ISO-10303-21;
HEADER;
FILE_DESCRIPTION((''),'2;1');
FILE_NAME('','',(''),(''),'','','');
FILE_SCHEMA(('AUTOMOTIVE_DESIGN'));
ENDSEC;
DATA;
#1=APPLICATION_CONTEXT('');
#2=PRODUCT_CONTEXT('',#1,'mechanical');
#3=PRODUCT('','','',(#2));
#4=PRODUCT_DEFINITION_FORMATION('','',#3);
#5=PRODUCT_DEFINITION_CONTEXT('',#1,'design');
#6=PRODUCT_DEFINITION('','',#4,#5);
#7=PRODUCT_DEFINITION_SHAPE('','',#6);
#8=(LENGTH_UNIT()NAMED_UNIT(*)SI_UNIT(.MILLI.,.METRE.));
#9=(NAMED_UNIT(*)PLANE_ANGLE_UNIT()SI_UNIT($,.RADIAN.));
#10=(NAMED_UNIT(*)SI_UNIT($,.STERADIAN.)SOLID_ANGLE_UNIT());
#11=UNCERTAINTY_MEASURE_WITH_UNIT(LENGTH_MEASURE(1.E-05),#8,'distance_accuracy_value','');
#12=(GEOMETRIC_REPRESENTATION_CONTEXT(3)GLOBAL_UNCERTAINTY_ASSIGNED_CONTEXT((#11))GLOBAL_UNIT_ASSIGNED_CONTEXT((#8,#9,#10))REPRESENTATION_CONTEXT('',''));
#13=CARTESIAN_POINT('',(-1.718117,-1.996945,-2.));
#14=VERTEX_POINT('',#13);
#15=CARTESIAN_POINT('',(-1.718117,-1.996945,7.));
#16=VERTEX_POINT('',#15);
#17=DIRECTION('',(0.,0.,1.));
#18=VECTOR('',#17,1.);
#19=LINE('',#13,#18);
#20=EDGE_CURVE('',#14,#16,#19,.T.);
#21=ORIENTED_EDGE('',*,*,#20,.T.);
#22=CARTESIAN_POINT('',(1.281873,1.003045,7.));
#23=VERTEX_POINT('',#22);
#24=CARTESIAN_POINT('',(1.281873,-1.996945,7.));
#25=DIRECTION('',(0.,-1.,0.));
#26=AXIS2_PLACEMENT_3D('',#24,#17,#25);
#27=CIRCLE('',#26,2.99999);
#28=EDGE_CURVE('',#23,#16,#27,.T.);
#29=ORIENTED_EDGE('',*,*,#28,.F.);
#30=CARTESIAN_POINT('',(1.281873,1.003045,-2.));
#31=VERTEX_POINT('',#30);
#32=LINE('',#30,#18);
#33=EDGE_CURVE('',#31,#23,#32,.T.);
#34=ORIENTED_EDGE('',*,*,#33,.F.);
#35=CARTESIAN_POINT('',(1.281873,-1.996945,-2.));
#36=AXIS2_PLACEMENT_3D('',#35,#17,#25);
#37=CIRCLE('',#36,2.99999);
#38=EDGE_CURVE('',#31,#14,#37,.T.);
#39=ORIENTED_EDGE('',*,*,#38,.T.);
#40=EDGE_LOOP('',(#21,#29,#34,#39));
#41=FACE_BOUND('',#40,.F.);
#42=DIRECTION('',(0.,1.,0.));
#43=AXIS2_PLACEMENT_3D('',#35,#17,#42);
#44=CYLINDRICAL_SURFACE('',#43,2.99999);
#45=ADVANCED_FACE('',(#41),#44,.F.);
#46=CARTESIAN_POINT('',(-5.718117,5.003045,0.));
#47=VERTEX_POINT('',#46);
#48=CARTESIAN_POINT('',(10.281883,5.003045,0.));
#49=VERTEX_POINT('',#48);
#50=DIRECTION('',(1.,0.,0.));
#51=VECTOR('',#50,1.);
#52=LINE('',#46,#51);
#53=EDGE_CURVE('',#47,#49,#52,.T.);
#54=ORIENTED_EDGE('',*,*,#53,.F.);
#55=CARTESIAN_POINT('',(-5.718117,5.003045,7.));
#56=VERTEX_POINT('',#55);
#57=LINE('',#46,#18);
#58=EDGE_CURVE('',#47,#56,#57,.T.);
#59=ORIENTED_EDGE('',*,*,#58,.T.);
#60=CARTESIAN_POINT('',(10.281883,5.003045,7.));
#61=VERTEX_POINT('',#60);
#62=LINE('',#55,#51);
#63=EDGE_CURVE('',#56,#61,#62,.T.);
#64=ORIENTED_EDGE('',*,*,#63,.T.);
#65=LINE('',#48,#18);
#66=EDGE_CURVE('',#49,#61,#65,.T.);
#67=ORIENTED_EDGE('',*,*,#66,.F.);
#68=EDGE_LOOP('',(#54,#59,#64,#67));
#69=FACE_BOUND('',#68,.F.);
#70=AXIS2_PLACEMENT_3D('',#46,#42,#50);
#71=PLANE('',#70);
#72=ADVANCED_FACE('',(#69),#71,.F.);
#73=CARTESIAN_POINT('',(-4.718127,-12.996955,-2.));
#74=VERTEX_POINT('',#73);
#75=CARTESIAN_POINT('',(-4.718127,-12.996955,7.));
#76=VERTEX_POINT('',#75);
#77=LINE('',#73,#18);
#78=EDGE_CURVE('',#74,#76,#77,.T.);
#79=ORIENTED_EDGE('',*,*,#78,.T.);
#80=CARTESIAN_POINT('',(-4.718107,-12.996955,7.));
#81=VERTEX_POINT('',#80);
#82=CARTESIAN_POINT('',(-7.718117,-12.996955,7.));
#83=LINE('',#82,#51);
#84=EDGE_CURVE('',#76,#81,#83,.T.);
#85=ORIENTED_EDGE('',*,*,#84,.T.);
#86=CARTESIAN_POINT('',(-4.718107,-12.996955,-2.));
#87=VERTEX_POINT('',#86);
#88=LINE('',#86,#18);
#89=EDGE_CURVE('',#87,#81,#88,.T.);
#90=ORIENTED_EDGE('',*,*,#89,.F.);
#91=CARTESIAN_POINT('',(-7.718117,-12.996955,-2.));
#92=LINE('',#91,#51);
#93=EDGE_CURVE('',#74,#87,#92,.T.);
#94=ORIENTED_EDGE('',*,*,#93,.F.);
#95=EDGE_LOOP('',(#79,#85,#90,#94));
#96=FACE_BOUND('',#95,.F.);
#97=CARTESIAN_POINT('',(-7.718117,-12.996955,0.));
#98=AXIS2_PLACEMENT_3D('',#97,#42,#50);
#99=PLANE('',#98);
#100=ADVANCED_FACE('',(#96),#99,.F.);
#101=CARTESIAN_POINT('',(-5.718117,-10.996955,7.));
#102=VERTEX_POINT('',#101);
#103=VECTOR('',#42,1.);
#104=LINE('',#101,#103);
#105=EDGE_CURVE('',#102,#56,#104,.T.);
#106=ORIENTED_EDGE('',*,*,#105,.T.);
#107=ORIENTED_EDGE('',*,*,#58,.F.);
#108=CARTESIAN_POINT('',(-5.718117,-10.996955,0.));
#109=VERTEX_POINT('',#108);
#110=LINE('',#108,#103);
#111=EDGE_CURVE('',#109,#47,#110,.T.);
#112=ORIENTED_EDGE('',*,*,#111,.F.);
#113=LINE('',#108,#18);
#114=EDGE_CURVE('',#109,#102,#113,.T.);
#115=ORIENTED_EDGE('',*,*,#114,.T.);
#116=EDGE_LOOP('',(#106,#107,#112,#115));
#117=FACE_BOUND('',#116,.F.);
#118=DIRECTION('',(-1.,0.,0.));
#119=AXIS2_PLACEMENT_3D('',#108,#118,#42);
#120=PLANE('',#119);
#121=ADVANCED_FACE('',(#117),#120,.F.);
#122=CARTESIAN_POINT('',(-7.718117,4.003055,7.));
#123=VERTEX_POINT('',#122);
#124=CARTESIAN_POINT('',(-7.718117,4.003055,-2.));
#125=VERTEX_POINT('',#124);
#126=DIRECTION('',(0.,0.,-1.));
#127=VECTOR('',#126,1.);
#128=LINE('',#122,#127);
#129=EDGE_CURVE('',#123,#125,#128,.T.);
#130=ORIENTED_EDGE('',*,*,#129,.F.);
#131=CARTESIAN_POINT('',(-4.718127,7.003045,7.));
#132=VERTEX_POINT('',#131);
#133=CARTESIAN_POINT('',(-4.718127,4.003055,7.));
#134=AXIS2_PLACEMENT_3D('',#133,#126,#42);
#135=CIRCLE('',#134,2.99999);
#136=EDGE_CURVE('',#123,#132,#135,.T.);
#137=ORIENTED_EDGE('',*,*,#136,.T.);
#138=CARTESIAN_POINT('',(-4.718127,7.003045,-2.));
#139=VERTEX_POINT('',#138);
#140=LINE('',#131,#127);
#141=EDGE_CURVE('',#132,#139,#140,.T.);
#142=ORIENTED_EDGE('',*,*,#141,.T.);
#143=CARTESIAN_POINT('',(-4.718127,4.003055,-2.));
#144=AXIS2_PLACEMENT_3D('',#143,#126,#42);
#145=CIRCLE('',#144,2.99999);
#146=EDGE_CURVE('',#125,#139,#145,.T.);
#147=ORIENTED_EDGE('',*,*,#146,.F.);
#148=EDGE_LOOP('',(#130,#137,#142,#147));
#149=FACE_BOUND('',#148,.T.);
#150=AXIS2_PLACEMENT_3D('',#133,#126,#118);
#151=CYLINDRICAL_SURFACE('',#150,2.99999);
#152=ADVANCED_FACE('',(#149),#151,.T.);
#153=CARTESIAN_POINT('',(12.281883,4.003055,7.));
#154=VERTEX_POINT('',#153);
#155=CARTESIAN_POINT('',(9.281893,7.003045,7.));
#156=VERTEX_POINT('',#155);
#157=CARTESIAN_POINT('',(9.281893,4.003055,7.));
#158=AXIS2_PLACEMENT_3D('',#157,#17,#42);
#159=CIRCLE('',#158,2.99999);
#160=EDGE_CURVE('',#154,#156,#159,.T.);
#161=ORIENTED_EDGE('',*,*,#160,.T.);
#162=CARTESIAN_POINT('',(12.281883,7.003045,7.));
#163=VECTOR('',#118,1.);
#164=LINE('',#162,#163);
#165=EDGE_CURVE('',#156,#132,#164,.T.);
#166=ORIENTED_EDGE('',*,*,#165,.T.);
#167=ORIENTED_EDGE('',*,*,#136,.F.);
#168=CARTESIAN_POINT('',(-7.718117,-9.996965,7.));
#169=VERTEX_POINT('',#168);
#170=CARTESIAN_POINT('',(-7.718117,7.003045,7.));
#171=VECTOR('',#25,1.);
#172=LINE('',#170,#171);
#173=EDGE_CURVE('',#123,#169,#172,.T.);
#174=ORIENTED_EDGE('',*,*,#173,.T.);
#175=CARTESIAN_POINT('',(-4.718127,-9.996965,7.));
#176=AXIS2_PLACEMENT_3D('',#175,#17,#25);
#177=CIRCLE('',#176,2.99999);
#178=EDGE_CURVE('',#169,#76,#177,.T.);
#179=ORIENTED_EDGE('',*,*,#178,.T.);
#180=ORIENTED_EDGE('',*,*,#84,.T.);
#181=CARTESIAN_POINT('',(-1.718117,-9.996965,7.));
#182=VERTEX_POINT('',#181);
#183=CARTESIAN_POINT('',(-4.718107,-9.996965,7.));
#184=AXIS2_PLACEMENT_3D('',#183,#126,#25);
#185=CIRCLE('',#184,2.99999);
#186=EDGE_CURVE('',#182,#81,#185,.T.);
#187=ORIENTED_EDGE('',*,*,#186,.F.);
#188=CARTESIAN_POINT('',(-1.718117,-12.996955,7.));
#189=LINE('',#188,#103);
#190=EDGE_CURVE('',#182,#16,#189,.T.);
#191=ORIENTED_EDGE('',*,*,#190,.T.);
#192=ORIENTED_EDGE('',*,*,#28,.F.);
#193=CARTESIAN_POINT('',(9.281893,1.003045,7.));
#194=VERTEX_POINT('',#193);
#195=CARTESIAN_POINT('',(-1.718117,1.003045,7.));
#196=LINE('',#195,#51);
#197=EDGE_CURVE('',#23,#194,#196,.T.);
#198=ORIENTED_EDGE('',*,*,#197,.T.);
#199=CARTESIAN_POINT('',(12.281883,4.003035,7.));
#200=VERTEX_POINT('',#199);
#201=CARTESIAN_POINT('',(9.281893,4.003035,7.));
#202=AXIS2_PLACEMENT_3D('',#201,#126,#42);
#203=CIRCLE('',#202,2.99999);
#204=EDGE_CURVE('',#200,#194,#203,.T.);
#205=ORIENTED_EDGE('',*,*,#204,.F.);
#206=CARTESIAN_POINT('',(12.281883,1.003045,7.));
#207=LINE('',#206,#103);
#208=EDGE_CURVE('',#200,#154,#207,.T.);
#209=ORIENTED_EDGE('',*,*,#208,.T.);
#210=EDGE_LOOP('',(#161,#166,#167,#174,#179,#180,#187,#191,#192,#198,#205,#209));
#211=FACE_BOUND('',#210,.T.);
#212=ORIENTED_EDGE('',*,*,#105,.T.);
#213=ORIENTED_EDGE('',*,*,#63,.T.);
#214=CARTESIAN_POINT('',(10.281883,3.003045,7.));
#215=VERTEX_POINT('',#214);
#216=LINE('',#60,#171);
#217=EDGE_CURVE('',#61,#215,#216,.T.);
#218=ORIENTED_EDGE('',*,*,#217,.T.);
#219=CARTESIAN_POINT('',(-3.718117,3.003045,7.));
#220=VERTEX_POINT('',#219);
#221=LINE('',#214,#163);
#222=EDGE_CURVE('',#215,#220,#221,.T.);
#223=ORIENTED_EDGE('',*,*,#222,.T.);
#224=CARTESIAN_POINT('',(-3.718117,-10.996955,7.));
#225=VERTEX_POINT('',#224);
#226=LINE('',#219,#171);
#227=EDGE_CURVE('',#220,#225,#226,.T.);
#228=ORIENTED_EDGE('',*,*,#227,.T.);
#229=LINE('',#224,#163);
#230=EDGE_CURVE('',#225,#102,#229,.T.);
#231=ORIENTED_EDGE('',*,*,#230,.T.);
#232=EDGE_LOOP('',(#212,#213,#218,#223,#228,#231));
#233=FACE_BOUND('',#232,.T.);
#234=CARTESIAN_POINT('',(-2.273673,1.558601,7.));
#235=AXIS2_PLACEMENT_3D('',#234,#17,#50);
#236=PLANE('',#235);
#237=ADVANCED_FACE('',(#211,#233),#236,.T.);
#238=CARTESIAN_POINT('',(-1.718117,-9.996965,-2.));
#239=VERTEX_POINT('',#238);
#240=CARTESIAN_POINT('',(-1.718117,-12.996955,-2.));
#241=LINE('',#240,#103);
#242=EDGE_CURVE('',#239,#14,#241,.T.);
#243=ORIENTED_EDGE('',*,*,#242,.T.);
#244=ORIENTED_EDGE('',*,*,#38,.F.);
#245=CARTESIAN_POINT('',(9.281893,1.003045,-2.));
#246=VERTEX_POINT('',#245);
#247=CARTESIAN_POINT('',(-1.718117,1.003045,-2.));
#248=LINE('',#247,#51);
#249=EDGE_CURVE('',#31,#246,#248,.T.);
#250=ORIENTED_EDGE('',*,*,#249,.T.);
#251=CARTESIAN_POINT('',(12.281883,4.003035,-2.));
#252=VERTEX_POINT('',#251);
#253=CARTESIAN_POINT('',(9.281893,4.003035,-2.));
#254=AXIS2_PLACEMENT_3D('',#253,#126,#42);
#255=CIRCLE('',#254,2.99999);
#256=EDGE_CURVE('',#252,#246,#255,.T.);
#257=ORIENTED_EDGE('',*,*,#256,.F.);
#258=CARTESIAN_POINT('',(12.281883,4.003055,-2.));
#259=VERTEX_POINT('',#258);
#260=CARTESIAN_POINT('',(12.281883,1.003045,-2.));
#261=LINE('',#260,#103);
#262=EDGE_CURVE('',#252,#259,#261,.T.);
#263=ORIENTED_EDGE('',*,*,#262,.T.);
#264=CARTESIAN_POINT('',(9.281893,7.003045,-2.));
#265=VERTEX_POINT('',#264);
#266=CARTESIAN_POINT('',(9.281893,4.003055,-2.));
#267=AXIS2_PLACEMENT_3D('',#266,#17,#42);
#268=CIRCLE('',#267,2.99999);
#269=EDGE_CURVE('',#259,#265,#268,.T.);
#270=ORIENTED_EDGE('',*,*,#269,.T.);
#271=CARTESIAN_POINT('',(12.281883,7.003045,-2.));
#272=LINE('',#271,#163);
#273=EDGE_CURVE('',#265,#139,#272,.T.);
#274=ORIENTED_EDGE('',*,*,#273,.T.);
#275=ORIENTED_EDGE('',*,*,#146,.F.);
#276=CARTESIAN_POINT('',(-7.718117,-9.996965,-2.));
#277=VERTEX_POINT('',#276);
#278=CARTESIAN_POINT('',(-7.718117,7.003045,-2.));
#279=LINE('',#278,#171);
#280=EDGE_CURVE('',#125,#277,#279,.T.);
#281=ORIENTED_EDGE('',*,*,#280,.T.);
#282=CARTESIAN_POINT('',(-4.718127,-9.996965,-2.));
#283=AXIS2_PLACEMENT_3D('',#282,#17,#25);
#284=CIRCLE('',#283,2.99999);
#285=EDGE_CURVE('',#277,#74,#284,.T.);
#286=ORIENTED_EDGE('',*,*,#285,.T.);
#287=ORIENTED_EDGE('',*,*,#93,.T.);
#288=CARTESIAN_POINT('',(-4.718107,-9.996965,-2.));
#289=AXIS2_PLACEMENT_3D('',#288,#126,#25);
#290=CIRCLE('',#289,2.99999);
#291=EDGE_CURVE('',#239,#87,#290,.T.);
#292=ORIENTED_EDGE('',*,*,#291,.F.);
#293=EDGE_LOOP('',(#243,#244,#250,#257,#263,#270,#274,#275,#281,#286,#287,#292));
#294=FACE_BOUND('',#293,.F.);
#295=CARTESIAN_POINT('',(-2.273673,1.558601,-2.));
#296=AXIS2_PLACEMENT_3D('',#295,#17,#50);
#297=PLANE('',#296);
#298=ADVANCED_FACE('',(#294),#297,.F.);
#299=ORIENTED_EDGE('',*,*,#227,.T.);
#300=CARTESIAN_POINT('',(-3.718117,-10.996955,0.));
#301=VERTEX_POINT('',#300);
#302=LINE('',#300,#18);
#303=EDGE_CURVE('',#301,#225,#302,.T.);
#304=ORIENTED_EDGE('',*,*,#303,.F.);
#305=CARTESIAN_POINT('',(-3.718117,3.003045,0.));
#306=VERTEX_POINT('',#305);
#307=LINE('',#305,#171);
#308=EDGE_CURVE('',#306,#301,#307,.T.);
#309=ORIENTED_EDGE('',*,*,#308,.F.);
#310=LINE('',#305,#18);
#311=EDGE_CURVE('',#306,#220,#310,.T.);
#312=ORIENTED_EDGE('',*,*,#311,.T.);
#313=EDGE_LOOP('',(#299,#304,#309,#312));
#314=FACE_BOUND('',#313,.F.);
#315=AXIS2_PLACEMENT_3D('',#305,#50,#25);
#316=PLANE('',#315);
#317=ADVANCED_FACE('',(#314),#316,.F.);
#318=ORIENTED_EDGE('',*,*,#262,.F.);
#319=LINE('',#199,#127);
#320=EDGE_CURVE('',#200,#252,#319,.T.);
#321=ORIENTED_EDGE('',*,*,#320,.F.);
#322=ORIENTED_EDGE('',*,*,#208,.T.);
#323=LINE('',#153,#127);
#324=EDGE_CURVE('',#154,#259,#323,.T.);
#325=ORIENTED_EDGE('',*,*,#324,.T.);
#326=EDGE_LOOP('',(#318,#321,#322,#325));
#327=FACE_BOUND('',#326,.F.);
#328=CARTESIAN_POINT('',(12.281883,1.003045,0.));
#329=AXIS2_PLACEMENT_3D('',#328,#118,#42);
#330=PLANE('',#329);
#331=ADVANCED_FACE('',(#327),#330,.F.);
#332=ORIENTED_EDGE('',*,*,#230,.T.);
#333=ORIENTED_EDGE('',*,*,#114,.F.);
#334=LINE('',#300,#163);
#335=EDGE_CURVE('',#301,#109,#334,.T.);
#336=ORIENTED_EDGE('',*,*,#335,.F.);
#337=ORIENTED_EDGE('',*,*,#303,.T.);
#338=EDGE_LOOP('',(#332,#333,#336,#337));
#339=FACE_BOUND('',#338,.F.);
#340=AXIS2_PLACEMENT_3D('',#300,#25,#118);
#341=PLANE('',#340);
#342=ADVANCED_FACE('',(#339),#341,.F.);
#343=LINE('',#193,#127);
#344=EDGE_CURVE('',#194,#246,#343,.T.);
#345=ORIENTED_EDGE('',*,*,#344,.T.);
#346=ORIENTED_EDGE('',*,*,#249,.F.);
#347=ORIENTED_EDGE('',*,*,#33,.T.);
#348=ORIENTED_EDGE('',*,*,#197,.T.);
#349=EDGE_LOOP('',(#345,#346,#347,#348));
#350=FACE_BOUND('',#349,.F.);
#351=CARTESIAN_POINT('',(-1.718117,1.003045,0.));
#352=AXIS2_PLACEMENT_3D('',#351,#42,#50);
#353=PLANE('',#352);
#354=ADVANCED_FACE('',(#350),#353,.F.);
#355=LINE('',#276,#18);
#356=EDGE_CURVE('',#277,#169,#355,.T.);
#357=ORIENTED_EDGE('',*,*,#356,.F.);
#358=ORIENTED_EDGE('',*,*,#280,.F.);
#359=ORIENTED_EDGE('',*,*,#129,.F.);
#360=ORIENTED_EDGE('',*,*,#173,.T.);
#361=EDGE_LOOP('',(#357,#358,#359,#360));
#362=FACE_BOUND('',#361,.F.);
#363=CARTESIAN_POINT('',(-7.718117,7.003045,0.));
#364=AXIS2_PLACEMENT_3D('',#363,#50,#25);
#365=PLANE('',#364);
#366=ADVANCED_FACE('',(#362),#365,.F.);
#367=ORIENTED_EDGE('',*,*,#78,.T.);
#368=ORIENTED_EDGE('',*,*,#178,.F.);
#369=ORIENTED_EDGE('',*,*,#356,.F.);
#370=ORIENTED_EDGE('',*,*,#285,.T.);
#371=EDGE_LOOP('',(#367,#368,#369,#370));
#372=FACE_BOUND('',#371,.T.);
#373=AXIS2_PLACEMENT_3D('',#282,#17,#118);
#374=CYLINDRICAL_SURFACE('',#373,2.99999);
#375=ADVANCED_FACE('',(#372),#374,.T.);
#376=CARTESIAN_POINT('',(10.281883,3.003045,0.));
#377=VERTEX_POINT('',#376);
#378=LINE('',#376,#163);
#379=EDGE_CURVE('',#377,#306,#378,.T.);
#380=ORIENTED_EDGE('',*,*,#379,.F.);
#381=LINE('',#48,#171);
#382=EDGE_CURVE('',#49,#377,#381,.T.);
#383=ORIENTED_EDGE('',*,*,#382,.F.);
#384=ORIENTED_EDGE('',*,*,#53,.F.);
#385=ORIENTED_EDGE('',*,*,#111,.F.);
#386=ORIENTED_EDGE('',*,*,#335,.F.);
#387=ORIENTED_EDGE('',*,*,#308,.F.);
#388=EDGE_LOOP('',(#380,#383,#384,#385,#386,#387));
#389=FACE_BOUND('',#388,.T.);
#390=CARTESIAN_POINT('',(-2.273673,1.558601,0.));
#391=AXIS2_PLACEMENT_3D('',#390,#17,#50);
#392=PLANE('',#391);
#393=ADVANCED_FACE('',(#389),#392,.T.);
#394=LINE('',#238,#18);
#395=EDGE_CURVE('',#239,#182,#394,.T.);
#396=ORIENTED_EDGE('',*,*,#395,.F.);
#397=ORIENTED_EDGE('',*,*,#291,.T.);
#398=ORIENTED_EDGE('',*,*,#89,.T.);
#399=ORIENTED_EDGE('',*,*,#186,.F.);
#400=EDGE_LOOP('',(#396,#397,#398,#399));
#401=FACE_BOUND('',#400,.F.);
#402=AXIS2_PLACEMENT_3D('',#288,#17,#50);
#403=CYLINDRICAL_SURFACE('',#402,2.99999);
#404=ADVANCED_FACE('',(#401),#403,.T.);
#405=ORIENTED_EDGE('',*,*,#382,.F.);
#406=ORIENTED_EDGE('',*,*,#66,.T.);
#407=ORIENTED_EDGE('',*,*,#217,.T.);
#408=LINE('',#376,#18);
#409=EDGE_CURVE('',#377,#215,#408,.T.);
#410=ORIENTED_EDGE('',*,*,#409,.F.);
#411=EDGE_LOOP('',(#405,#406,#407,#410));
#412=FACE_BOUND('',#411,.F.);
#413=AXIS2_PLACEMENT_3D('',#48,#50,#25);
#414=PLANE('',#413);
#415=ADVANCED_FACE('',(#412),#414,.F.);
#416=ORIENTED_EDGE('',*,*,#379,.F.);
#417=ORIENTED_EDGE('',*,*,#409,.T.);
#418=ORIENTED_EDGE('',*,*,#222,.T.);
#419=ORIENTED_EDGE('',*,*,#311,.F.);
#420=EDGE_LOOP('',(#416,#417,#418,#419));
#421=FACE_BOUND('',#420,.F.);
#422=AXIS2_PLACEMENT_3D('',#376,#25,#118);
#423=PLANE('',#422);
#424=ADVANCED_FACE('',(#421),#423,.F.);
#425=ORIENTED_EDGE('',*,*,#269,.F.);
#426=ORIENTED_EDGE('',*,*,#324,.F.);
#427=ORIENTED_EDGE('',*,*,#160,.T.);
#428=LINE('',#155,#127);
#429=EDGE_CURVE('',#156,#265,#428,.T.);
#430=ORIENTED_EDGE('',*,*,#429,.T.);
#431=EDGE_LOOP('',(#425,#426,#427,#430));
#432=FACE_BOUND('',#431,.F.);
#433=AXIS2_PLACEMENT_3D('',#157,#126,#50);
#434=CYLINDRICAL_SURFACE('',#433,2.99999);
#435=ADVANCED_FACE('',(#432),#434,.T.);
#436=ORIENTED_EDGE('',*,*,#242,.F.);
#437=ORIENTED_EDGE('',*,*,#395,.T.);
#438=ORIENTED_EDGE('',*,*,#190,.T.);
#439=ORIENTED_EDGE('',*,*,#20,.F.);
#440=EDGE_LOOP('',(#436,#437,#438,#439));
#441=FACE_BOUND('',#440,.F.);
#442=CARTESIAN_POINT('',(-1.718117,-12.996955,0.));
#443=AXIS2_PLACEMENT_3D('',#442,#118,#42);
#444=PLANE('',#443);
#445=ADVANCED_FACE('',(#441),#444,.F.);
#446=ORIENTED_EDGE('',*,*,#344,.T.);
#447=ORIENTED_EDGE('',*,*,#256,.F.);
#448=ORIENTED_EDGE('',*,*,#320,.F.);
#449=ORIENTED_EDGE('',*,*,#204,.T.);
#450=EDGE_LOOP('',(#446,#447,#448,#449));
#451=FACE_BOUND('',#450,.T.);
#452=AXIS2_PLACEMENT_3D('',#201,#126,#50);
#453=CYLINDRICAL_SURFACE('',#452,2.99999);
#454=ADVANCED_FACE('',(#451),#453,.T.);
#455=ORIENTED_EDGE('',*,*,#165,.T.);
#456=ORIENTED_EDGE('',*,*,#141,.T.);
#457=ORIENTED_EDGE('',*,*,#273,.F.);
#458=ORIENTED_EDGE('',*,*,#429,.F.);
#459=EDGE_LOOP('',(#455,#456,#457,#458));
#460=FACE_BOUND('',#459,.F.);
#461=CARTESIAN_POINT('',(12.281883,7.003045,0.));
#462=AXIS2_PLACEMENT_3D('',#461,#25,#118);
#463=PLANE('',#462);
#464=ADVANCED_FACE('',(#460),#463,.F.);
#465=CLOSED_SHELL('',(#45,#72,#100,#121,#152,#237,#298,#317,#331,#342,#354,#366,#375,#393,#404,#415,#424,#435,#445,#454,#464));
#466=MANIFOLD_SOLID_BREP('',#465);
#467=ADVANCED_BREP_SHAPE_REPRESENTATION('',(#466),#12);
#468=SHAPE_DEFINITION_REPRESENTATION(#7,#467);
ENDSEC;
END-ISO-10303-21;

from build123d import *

# Parameters (mm, degrees)
F1_DEPTH = 2
F2_DEPTH = 7
F3_R     = 2.99999


# Not quite as in the source:
# - a fillet or chamfer is up to 0.001 mm smaller than in the source, because OpenCascade refuses the exact size


with BuildPart() as f1:
    # F0 (on Top) → F1 (new body)
    with BuildSketch(Plane.XY):
        Polygon((10.2818826017, 7.0030450644), (-7.7181173983, 7.0030450644), (-7.7181173983, -10.9969549356), (-5.7181173983, -10.9969549356), (-5.7181173983, 5.0030450644), (10.2818826017, 5.0030450644), align=None)
        Polygon((10.2818826017, 3.0030450644), (10.2818826017, 5.0030450644), (-5.7181173983, 5.0030450644), (-5.7181173983, -10.9969549356), (-3.7181173983, -10.9969549356), (-3.7181173983, 3.0030450644), align=None)
        Polygon((10.2818826017, 1.0030450644), (10.2818826017, 3.0030450644), (-3.7181173983, 3.0030450644), (-3.7181173983, -10.9969549356), (-1.7181173983, -10.9969549356), (-1.7181173983, 1.0030450644), align=None)
        Polygon((12.2818826017, 7.0030450644), (10.2818826017, 7.0030450644), (10.2818826017, 5.0030450644), (10.2818826017, 3.0030450644), (10.2818826017, 1.0030450644), (12.2818826017, 1.0030450644), align=None)
        Polygon((-5.7181173983, -10.9969549356), (-7.7181173983, -10.9969549356), (-7.7181173983, -12.9969549356), (-1.7181173983, -12.9969549356), (-1.7181173983, -10.9969549356), (-3.7181173983, -10.9969549356), align=None)
    extrude(amount=-F1_DEPTH)

    # F0 (on Top) → F2 (join)
    with BuildSketch(Plane.XY):
        Polygon((10.2818826017, 7.0030450644), (-7.7181173983, 7.0030450644), (-7.7181173983, -10.9969549356), (-5.7181173983, -10.9969549356), (-5.7181173983, 5.0030450644), (10.2818826017, 5.0030450644), align=None)
        Polygon((10.2818826017, 1.0030450644), (10.2818826017, 3.0030450644), (-3.7181173983, 3.0030450644), (-3.7181173983, -10.9969549356), (-1.7181173983, -10.9969549356), (-1.7181173983, 1.0030450644), align=None)
        Polygon((12.2818826017, 7.0030450644), (10.2818826017, 7.0030450644), (10.2818826017, 5.0030450644), (10.2818826017, 3.0030450644), (10.2818826017, 1.0030450644), (12.2818826017, 1.0030450644), align=None)
        Polygon((-5.7181173983, -10.9969549356), (-7.7181173983, -10.9969549356), (-7.7181173983, -12.9969549356), (-1.7181173983, -12.9969549356), (-1.7181173983, -10.9969549356), (-3.7181173983, -10.9969549356), align=None)
    extrude(amount=F2_DEPTH)

    # F3 (radius 3 in the source; OpenCascade refuses exactly that, so slightly less here)
    f3_edges = [f1.edges().sort_by_distance(p)[0] for p in [
        (-1.718117, 1.003045, 2.5),
        (-7.718117, 7.003045, 2.5),
        (-7.718117, -12.996955, 2.5),
        (-1.718117, -12.996955, 2.5),
        (12.281883, 1.003045, 2.5),
        (12.281883, 7.003045, 2.5),
    ]]
    fillet(f3_edges, radius=F3_R)


solid = f1.part
